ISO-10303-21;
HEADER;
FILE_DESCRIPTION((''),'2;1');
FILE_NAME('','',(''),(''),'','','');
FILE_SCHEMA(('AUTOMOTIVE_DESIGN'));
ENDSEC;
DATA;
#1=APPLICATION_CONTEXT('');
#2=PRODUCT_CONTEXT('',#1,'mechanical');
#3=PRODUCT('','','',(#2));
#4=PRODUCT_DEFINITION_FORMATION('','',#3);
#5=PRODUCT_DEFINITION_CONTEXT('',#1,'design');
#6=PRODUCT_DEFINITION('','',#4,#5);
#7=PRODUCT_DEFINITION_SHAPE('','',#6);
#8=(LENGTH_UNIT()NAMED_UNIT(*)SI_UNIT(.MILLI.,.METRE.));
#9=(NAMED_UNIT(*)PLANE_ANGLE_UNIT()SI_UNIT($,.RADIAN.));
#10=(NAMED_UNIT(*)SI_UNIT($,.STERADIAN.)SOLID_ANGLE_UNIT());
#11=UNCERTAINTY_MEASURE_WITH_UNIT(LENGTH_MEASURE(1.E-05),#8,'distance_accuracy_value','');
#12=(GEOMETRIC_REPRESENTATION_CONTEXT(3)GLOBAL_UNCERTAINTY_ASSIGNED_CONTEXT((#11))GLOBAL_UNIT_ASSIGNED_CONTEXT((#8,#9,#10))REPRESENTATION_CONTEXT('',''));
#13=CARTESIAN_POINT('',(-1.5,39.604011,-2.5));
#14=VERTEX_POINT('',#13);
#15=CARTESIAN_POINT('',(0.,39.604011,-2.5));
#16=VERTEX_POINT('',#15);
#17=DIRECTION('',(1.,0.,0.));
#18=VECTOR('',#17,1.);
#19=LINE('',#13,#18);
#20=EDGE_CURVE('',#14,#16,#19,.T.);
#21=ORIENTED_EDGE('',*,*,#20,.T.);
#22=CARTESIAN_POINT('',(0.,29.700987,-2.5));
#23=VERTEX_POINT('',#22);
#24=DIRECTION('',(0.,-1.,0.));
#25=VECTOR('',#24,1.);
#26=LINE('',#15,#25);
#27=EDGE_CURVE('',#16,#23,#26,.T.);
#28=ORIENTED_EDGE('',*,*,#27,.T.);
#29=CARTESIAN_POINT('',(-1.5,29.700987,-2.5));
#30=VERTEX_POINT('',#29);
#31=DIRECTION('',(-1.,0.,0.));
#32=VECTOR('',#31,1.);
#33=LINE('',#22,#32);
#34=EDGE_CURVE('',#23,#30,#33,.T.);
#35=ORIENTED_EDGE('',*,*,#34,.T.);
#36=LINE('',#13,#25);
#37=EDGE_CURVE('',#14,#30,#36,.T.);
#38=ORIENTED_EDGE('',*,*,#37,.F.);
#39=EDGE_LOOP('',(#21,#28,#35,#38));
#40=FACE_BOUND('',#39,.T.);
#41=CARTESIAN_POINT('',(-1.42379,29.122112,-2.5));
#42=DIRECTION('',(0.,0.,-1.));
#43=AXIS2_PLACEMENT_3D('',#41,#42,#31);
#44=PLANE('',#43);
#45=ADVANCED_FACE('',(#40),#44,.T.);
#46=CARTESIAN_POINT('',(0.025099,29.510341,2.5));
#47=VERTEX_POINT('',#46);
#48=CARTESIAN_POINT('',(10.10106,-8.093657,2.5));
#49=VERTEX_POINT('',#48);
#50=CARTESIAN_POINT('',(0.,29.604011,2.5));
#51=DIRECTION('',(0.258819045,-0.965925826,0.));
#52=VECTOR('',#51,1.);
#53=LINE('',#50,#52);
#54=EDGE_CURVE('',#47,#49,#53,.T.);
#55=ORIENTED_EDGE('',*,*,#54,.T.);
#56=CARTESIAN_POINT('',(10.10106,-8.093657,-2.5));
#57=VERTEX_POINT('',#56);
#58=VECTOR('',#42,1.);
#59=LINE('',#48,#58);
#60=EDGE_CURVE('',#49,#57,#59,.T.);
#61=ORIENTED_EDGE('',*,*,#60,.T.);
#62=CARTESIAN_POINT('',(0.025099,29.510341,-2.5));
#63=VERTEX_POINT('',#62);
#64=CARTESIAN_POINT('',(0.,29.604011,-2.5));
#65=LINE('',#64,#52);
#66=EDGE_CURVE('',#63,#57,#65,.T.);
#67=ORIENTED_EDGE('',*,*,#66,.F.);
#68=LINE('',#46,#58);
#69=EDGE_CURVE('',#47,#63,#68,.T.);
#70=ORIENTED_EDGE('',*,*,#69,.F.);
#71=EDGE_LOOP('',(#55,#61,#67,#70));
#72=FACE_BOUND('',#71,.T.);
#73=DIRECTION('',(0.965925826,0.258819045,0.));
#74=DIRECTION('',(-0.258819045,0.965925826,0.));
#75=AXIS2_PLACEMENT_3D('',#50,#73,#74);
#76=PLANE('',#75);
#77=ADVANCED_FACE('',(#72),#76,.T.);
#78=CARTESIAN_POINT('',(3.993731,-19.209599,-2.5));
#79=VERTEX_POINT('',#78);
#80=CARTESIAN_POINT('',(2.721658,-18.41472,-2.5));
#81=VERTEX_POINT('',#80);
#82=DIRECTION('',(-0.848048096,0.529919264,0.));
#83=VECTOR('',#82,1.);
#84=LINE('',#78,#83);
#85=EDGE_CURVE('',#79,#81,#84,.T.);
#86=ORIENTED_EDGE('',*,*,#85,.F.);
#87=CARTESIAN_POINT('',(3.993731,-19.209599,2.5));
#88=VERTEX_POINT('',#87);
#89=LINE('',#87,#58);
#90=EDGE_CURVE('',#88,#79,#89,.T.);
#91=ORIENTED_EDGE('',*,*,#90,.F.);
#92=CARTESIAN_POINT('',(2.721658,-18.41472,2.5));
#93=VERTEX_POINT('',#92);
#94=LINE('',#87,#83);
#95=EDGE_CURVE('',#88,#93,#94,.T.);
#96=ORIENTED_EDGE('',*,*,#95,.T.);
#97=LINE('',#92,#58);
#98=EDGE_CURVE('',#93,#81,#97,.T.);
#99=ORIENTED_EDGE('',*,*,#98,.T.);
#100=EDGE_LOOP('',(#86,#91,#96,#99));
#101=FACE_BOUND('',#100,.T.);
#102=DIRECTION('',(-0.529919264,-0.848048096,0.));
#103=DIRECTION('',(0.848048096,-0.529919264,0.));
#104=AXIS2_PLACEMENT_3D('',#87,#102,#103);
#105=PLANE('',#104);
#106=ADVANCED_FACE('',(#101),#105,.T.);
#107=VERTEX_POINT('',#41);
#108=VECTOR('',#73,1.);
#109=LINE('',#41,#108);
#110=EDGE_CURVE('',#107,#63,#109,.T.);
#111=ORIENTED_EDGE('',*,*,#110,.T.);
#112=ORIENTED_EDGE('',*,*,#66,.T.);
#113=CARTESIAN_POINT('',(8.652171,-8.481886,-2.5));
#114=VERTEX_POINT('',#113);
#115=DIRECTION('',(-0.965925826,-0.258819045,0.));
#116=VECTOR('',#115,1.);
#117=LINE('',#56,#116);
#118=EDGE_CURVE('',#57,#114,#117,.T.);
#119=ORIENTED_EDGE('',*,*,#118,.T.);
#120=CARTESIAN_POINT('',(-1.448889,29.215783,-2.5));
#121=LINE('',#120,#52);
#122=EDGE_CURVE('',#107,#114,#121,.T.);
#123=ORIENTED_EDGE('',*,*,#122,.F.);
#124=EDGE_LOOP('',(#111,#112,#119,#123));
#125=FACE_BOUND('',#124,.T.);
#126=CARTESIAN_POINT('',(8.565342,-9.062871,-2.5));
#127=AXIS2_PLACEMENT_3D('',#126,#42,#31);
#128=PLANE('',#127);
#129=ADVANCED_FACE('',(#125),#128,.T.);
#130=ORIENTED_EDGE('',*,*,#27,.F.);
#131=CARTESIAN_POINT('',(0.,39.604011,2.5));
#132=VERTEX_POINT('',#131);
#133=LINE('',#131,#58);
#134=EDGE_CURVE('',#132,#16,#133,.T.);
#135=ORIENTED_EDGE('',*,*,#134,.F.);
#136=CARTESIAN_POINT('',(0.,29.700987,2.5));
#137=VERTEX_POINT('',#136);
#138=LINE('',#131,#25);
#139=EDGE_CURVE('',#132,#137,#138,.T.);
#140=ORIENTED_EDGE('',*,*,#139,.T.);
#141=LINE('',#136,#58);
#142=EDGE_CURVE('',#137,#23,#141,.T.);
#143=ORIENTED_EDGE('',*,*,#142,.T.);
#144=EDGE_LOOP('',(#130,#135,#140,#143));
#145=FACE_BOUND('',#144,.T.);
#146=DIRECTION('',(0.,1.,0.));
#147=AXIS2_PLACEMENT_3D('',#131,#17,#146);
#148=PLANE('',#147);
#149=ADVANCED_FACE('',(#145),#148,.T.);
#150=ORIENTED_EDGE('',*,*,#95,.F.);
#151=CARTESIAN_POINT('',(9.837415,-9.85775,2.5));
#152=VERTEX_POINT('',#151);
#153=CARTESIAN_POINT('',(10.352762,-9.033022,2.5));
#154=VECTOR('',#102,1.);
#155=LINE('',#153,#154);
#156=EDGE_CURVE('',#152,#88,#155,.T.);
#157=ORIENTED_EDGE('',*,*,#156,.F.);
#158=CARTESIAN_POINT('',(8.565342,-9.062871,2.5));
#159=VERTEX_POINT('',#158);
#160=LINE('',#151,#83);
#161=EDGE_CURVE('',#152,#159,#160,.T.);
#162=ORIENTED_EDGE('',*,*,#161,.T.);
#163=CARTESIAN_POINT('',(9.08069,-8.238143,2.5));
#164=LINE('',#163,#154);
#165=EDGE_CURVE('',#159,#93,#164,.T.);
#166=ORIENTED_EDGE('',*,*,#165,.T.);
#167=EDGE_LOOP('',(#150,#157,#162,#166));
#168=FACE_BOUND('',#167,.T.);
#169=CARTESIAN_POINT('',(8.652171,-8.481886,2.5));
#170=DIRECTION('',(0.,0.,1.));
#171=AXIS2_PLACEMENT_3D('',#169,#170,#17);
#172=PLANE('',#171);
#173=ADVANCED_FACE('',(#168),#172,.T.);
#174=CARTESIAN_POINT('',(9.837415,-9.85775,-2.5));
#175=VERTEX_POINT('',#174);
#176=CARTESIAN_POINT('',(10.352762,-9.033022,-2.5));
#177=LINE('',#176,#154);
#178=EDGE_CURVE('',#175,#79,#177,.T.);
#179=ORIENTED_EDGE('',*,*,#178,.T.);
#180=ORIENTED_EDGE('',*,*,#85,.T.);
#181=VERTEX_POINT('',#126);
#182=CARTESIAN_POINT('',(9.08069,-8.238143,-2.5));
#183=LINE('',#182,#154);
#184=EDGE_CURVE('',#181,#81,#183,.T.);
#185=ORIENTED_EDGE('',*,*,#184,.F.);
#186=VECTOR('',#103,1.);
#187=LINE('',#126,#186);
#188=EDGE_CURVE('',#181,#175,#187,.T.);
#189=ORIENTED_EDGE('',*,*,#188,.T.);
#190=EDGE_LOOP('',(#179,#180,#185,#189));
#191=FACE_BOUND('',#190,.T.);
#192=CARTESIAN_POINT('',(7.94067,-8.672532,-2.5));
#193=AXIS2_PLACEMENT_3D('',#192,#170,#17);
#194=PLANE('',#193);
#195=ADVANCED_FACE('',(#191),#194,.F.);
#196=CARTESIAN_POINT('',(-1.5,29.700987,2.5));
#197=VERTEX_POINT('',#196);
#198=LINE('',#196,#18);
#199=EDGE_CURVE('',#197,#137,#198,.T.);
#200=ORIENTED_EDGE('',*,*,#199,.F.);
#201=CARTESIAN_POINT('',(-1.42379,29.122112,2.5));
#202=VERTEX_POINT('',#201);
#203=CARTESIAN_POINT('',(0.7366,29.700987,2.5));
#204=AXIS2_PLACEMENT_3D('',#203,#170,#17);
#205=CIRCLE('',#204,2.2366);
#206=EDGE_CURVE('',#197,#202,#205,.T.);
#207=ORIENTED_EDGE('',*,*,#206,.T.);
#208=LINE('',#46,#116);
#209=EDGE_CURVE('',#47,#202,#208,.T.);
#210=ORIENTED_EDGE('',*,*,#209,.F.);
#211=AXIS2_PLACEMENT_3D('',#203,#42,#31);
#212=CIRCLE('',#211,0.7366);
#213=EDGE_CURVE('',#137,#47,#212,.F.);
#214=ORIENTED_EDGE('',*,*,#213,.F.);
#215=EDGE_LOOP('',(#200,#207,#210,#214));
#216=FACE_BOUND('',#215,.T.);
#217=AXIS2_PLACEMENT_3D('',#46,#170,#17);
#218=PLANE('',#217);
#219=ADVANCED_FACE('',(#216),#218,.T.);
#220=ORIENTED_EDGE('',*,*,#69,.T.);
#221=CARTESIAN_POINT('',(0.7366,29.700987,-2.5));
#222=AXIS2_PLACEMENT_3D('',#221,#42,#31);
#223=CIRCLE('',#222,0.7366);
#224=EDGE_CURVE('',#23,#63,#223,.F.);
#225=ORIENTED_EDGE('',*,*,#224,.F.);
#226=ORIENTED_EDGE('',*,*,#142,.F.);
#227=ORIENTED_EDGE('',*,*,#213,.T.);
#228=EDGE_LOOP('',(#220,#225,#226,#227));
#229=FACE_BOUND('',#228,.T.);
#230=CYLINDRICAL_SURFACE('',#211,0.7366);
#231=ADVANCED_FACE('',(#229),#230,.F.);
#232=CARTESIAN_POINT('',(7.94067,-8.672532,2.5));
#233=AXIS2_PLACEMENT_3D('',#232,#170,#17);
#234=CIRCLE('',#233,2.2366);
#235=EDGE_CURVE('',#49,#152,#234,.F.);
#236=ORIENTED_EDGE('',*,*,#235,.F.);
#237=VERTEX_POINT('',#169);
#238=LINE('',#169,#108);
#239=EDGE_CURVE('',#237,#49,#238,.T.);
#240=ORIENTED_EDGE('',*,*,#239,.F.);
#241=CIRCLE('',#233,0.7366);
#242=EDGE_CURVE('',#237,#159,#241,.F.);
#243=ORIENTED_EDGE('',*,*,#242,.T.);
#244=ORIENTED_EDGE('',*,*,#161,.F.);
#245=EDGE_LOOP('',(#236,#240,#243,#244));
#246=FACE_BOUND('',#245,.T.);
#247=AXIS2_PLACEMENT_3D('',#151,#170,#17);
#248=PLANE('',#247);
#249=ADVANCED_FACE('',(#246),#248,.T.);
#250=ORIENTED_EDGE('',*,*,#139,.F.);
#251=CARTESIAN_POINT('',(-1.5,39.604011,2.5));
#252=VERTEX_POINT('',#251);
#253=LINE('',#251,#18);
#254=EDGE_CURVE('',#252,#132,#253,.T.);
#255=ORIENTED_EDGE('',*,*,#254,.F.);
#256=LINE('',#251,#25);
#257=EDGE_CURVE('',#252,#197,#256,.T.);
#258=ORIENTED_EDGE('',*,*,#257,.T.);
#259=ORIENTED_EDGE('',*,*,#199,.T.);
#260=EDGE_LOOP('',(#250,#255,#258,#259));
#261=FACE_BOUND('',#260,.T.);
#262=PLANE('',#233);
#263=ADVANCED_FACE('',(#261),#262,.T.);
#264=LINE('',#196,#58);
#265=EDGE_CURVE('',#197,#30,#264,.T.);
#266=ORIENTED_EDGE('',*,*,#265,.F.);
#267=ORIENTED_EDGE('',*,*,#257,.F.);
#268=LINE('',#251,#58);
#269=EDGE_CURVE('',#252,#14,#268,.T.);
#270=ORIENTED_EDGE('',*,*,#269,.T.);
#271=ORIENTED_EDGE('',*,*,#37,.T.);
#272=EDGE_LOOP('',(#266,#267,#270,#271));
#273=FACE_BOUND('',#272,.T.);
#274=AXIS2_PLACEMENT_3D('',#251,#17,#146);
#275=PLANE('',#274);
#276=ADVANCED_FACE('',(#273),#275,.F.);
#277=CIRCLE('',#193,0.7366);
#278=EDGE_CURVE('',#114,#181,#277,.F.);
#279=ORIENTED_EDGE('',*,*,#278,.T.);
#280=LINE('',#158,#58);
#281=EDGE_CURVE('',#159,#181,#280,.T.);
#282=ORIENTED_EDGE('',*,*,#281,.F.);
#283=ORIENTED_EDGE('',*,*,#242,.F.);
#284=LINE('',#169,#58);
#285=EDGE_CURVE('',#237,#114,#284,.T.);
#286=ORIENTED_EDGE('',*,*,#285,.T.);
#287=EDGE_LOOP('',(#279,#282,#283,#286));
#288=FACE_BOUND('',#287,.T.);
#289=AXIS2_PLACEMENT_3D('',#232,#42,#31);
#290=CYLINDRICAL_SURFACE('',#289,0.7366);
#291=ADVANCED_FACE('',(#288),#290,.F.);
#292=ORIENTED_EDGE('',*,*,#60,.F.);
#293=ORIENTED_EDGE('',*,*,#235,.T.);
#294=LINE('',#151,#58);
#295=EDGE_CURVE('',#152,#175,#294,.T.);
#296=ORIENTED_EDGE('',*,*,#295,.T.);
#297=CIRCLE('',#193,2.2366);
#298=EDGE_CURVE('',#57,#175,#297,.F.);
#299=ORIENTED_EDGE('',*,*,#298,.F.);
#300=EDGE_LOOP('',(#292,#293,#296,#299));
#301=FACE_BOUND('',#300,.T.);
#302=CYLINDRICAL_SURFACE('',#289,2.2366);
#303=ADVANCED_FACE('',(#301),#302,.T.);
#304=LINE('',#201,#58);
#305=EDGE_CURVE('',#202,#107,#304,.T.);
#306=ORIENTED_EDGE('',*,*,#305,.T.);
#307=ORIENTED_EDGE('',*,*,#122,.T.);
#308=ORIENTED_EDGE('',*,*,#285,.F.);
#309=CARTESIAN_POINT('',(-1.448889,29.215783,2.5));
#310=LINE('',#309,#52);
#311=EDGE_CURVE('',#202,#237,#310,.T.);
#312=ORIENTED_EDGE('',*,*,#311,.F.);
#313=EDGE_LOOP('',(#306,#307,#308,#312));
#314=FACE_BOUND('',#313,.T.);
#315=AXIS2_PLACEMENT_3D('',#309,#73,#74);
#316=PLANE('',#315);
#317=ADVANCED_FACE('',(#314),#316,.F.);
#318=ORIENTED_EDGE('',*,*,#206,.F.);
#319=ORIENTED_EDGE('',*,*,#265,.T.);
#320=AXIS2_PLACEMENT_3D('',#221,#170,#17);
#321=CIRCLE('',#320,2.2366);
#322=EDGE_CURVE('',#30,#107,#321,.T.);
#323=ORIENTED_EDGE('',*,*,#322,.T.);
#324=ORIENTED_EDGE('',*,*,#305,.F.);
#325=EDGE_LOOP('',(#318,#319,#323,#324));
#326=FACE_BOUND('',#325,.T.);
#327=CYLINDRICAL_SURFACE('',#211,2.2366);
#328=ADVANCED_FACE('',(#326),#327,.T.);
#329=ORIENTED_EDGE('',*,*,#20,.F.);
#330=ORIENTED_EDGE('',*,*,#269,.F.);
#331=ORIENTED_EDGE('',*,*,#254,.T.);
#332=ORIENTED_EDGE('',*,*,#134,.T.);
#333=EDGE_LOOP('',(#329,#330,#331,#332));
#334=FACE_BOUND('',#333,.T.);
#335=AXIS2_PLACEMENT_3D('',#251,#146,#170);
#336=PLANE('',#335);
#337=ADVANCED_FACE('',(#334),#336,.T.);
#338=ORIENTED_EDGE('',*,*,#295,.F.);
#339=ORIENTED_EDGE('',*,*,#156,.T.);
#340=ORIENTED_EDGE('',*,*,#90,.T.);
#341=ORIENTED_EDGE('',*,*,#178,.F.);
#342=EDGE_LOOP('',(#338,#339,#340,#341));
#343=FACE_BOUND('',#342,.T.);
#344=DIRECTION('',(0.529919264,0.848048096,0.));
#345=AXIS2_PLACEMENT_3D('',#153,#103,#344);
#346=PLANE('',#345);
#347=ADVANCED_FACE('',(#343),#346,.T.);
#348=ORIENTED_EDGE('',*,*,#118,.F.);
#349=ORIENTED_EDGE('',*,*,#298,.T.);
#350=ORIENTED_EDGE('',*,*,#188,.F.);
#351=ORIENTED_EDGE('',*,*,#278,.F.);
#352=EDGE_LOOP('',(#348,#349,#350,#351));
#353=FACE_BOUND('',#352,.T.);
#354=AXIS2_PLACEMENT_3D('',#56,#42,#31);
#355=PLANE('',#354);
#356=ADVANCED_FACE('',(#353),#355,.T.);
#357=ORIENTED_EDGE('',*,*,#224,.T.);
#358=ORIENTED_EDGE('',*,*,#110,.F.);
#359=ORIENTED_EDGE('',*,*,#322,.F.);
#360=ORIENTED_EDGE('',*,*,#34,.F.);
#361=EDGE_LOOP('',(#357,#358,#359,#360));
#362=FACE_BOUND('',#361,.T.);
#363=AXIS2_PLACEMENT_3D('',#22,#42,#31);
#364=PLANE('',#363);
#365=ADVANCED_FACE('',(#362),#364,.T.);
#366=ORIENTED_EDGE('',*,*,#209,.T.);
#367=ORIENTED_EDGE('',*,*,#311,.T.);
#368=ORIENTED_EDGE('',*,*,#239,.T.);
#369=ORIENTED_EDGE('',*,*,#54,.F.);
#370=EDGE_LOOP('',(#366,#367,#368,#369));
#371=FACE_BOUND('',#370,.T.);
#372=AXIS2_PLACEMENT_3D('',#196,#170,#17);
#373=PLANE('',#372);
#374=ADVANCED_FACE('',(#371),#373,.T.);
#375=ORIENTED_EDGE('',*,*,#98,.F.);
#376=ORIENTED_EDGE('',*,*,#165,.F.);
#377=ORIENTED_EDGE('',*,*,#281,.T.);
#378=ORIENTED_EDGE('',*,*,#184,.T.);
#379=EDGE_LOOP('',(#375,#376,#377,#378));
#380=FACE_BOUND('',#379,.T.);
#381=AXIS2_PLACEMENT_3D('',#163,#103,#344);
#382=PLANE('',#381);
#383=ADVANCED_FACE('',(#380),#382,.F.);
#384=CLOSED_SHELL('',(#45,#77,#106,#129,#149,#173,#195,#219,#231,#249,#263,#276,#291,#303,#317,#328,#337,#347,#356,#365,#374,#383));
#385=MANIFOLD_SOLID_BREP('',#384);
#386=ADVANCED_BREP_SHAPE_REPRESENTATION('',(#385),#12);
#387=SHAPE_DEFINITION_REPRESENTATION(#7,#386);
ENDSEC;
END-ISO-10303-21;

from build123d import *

# Parameters (mm, degrees)
BASE_FLANGE1_DEPTH      = 2.5
BASE_FLANGE1_DEPTH_BACK = 2.5


# Sheet-metal steps are written as plain solids
with BuildPart() as part:
    # Sketch1 → Base-Flange1 (new, two sides: drawn at the far end of the back side and taken through both)
    with BuildSketch(Plane.XY.offset(-BASE_FLANGE1_DEPTH_BACK)):
        with BuildLine():
            Line((0, 39.604011434), (0, 29.700986664))
            ThreePointArc((0, 29.700986664), (0.006301715, 29.60484107), (0.025099036, 29.510340555))
            Line((0.025099036, 29.510340555), (10.101059931, -8.09365744))
            ThreePointArc((10.101059931, -8.09365744), (10.152703108, -9.003122645), (9.8374146, -9.857749543))
            Line((9.8374146, -9.857749543), (3.993730633, -19.209598772))
            Line((3.993730633, -19.209598772), (2.721658489, -18.414719875))
            Line((2.721658489, -18.414719875), (8.565342456, -9.062870646))
            ThreePointArc((8.565342456, -9.062870646), (8.669179313, -8.781408529), (8.652171192, -8.481886008))
            Line((8.652171192, -8.481886008), (-1.423789703, 29.122111987))
            ThreePointArc((-1.423789703, 29.122111987), (-1.480865577, 29.409051782), (-1.5, 29.700986664))
            Line((-1.5, 29.700986664), (-1.5, 39.604011434))
            Line((-1.5, 39.604011434), (0, 39.604011434))
        make_face()
    extrude(amount=BASE_FLANGE1_DEPTH + BASE_FLANGE1_DEPTH_BACK)


solid = part.part
